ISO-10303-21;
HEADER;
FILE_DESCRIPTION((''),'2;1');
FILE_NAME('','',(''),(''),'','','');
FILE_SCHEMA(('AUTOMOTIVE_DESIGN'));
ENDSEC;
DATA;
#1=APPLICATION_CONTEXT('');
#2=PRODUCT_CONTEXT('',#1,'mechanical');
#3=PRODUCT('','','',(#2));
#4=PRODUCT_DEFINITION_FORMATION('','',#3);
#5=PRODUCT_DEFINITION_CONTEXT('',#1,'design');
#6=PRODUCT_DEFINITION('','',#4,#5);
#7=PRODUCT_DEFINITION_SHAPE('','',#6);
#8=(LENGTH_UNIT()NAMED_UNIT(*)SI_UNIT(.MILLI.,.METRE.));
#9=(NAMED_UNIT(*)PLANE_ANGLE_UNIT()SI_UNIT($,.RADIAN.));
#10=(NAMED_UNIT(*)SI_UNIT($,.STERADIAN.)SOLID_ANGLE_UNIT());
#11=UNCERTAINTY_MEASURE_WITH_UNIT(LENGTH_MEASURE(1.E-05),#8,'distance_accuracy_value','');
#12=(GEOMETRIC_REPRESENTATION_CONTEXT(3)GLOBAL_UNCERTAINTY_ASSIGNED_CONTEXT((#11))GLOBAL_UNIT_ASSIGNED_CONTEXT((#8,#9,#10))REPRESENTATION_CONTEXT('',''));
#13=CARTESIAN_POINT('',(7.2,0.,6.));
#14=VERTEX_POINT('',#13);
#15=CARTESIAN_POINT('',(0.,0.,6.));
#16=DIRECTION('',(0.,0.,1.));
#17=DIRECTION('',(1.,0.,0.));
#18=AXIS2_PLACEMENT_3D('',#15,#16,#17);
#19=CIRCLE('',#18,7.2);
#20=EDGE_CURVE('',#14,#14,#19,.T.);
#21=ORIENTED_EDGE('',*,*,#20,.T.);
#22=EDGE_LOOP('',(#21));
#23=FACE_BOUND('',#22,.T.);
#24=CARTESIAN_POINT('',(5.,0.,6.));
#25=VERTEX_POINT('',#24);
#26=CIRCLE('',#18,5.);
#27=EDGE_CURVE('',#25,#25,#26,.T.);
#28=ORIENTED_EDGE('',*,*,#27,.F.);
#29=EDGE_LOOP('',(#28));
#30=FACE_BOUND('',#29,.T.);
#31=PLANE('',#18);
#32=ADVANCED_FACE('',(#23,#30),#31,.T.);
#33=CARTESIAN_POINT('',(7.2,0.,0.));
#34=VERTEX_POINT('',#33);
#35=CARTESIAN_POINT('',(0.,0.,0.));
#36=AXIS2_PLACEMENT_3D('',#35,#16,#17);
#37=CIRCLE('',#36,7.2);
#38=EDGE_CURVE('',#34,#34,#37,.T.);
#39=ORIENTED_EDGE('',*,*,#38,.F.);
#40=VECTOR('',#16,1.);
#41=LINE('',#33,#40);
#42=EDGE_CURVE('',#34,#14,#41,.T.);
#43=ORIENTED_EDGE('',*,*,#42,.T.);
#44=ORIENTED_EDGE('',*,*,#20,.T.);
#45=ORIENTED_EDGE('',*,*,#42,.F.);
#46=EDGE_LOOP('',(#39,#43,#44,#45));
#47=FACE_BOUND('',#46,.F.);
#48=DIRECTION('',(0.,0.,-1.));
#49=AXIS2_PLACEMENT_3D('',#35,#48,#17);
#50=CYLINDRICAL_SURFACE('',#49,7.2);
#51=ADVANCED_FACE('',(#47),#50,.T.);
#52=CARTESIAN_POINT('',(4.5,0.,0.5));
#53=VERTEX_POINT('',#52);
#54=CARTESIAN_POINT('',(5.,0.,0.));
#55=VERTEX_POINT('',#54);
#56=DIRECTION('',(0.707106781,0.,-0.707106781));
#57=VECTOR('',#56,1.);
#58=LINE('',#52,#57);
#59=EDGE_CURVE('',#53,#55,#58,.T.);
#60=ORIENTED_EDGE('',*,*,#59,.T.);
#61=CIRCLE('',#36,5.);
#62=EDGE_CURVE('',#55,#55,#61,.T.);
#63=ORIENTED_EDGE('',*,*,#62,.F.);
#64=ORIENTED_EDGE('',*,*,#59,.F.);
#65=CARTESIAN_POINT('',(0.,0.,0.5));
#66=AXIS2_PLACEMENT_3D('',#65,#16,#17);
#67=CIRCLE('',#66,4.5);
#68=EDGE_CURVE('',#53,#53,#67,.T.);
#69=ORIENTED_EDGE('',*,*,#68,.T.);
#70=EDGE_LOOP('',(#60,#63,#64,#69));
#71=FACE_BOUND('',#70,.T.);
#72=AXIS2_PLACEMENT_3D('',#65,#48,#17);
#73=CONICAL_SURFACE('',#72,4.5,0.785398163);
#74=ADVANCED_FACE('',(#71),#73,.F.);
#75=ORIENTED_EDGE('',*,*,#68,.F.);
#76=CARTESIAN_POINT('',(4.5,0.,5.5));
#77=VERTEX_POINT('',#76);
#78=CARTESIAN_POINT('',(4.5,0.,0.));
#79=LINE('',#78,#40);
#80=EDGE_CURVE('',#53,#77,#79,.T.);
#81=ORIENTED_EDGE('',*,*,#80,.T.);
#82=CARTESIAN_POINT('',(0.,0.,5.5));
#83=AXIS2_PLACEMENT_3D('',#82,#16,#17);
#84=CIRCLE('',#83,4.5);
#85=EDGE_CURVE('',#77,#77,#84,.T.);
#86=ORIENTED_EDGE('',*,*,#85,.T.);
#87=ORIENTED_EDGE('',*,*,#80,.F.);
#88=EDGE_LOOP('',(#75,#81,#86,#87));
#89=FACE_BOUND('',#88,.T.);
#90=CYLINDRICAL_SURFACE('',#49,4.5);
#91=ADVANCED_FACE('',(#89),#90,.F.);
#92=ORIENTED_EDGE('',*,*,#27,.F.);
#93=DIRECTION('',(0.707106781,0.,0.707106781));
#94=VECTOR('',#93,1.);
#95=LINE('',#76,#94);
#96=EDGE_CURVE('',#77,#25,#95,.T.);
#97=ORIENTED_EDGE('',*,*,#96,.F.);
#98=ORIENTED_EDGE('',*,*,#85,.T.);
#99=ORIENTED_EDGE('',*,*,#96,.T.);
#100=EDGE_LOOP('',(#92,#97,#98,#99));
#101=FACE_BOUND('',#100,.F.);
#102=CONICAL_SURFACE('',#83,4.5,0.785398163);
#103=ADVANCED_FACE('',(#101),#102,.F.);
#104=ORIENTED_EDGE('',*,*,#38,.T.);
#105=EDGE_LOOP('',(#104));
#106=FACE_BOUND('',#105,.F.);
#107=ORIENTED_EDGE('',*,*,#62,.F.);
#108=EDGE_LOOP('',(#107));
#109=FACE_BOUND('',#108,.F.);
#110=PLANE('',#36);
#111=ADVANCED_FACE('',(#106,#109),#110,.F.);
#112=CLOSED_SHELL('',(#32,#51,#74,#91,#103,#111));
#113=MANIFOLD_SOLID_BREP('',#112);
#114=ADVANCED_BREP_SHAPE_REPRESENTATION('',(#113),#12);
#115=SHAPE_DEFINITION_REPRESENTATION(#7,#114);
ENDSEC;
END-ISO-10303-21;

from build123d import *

# Parameters (mm, degrees)
F0_R     = 7.2
F0_R_2   = 4.5
F2_DEPTH = 6
F3_SIZE2 = 0.5
F3_SIZE  = 0.5
F4_SIZE2 = 0.5
F4_SIZE  = 0.5


# Not quite as in the source:
# - the program builds the solid bodies; features that only make, move or delete a surface that nothing else refers to are left out


with BuildPart() as f2:
    # F0 (on Top) → F2 (new body)
    with BuildSketch(Plane.XY):
        Circle(F0_R)
        Circle(F0_R_2, mode=Mode.SUBTRACT)
    extrude(amount=F2_DEPTH)

    # F3
    f3_edges = [f2.edges().sort_by_distance(p)[0] for p in [
        (-4.5, 0, 0),
    ]]
    chamfer(f3_edges, length=F3_SIZE, length2=F3_SIZE2)

    # F4
    f4_edges = [f2.edges().sort_by_distance(p)[0] for p in [
        (-4.5, 0, 6),
    ]]
    chamfer(f4_edges, length=F4_SIZE, length2=F4_SIZE2)


solid = f2.part
